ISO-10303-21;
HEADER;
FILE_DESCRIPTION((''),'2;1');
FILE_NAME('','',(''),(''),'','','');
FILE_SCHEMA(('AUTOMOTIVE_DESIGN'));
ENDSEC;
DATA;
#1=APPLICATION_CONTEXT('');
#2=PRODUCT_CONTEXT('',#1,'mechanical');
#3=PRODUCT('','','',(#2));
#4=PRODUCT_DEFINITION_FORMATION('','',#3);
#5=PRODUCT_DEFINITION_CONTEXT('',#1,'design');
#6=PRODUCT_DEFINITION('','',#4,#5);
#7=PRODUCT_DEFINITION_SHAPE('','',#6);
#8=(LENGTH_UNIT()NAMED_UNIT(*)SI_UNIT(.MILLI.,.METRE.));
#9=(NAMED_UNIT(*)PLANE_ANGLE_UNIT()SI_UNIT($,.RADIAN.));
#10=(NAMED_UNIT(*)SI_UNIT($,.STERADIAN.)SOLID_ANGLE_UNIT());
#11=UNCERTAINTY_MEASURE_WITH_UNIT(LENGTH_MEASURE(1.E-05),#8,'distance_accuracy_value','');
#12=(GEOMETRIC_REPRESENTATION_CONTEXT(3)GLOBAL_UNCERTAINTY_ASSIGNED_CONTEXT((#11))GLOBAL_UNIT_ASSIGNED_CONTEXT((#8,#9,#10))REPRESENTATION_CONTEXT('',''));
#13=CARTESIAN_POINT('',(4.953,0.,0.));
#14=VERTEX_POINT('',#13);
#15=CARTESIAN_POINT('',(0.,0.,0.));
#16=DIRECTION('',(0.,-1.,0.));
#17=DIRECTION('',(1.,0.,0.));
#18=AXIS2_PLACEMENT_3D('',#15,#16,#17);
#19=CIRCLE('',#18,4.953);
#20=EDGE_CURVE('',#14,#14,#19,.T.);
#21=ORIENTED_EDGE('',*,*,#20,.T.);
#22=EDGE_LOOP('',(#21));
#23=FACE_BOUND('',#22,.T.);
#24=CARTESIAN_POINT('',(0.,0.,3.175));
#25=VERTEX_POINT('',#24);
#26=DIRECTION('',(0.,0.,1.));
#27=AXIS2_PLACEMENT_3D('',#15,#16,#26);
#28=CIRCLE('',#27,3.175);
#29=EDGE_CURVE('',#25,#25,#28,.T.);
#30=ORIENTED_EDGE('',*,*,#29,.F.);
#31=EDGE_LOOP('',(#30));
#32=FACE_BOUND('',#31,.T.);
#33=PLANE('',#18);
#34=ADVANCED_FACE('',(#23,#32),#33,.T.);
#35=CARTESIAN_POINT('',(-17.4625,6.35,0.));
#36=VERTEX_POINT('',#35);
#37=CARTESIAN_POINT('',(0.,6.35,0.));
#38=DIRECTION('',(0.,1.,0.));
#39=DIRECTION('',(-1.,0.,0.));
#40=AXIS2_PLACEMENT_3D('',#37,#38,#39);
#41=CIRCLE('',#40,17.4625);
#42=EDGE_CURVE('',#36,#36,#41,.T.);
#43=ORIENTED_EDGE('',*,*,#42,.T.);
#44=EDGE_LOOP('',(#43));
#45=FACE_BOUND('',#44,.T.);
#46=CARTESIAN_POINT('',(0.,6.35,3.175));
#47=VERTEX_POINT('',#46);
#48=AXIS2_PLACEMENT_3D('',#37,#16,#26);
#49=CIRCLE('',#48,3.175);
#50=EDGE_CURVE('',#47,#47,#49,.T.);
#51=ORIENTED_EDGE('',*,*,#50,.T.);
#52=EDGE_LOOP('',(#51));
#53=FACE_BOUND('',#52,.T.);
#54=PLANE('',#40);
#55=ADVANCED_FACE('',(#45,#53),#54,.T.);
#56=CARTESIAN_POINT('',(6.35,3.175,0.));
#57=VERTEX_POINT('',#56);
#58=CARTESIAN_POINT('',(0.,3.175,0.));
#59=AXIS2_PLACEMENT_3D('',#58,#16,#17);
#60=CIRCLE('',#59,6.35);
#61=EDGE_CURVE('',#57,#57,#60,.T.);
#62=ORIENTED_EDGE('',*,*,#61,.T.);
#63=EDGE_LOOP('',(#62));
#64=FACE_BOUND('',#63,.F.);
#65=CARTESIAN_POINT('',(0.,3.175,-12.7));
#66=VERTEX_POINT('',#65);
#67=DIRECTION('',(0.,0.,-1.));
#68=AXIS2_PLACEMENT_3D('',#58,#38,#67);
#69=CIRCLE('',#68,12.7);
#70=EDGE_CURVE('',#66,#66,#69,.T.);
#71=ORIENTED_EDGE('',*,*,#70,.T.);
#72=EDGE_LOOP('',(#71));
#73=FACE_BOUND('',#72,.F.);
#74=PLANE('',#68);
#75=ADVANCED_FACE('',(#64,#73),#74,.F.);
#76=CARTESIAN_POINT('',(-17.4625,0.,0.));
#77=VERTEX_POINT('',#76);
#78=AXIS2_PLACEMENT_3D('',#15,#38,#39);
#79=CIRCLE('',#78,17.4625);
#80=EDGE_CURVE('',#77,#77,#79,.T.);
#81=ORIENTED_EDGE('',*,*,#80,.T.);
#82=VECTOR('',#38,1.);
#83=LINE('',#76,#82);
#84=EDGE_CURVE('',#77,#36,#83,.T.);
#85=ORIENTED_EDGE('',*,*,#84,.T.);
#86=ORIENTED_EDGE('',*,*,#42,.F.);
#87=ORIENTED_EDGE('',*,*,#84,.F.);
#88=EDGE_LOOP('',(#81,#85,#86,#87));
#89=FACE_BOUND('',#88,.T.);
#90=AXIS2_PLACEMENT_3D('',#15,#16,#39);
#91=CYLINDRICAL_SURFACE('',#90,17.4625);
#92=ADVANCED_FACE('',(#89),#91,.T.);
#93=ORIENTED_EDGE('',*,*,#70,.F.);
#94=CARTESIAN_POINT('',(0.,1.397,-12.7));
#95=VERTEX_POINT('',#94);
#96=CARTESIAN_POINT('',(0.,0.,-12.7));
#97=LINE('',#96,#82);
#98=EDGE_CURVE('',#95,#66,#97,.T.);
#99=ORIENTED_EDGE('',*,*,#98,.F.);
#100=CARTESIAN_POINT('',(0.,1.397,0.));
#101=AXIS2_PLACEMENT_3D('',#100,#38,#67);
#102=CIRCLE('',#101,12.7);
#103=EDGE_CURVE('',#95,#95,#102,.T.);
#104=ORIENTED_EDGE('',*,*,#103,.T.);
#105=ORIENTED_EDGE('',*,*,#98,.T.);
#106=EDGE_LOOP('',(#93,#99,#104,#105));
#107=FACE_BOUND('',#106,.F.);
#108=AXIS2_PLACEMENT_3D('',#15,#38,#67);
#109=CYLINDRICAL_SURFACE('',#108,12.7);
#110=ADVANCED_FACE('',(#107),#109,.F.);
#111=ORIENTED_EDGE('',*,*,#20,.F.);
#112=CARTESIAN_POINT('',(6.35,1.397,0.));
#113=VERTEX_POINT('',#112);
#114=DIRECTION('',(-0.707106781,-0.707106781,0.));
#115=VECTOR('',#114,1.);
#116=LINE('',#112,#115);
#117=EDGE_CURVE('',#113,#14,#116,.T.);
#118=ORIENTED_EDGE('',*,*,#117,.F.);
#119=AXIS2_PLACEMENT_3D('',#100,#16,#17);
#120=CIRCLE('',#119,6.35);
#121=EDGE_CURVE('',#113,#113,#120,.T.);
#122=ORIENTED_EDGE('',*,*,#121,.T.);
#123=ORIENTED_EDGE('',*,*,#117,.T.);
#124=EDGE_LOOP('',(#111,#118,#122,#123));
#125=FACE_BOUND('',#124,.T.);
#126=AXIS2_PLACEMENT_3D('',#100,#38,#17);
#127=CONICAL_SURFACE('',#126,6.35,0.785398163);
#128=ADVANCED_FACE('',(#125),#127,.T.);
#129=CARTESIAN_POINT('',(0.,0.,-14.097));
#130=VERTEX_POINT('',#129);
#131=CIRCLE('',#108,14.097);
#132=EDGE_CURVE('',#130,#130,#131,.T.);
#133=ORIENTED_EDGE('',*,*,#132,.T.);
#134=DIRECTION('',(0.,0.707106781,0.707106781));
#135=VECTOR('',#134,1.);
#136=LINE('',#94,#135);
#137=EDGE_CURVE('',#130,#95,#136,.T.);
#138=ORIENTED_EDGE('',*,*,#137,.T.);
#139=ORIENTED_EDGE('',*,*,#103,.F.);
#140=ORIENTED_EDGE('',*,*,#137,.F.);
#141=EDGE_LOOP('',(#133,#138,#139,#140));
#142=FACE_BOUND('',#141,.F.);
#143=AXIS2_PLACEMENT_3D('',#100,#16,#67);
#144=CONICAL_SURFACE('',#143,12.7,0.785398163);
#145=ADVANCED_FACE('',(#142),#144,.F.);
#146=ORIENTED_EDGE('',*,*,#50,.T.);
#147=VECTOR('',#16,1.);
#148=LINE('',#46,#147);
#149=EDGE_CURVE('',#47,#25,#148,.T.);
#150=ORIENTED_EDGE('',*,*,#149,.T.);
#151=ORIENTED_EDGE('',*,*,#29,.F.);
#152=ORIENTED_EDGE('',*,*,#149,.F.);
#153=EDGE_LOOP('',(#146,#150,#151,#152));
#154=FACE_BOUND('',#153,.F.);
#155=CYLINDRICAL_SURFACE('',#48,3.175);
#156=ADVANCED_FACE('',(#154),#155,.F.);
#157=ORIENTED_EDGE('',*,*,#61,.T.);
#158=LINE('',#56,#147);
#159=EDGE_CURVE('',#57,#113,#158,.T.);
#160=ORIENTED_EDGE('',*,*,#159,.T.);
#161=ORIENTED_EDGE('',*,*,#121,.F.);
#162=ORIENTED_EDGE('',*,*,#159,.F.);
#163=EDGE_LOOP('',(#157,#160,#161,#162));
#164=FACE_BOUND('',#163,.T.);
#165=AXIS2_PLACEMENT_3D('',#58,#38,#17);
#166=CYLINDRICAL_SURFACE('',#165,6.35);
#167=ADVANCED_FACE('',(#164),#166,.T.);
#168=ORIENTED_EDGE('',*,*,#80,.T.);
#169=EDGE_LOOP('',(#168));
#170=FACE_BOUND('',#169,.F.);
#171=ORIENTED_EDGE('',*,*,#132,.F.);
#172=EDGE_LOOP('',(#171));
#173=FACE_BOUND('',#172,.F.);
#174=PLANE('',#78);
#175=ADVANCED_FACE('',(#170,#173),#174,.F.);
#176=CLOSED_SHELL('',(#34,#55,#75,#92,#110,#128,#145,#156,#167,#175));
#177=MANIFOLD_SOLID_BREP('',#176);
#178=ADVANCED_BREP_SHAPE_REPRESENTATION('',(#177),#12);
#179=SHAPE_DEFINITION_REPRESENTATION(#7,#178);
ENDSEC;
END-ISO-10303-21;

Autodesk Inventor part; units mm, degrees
ref_plane "YZ Plane" through (0, 0, 0) normal (1, 0, 0) x (0, 1, 0)
ref_plane "XZ Plane" through (0, 0, 0) normal (0, 1, 0) x (-1, 0, 0)
ref_plane "XY Plane" through (0, 0, 0) normal (0, 0, 1) x (1, 0, 0)
sketch "SketchCircles" plane through (0, 0, 0) normal (0, 1, 0) x (-1, 0, 0)
  circle A0 centre (0, 0) radius 12.7
  circle A1 centre (0, 0) radius 6.35
  circle A2 centre (0, 0) radius 17.4625
  dimension "d0" = 25.4
  dimension "d1" = 12.7
  dimension "d2" = 34.925
extrude "Extrusion100" add sketch "SketchCircles" along normal blind 6.35 contours A0 | A1 | A2
sketch "SketchLines" plane through (0, 0, 0) normal (0, -1, 0) x (1, 0, 0)
  line L0 (-17.7365, 0) -> (17.5532, 0)
  line L1 (-0.0917, 17.7823) -> (-0.0917, -17.324)
  point P0 (0, 0)
hole "Hole1" at (0, 0, 0) direction (0, 1, 0) diameter 25.4 depth 3.175
sketch "Sketch3" plane through (0, 3.175, 0) normal (0, -1, 0) x (1, 0, 0)
  circle A0 centre (0, 0) radius 6.35
  dimension "d12" = 12.7
extrude "Extrusion2" add sketch "Sketch3" along normal blind 3.175
chamfer "Chamfer1" distance 1.397 angle 45 1 edges at (0, 0, 12.7)
chamfer "Chamfer2" distance 1.397 angle 45 1 edges at (-6.35, 0, 0)
sketch "Sketch4" plane through (0, 6.35, 0) normal (0, 1, 0) x (1, 0, 0)
  circle A0 centre (0, 0) radius 3.9688
  dimension "d21" = 7.9375
hole "Hole2" at (0, 6.35, 0) direction (0, -1, 0) diameter 6.35 depth 12.7
properties part number "tiedown-hook-mount"
